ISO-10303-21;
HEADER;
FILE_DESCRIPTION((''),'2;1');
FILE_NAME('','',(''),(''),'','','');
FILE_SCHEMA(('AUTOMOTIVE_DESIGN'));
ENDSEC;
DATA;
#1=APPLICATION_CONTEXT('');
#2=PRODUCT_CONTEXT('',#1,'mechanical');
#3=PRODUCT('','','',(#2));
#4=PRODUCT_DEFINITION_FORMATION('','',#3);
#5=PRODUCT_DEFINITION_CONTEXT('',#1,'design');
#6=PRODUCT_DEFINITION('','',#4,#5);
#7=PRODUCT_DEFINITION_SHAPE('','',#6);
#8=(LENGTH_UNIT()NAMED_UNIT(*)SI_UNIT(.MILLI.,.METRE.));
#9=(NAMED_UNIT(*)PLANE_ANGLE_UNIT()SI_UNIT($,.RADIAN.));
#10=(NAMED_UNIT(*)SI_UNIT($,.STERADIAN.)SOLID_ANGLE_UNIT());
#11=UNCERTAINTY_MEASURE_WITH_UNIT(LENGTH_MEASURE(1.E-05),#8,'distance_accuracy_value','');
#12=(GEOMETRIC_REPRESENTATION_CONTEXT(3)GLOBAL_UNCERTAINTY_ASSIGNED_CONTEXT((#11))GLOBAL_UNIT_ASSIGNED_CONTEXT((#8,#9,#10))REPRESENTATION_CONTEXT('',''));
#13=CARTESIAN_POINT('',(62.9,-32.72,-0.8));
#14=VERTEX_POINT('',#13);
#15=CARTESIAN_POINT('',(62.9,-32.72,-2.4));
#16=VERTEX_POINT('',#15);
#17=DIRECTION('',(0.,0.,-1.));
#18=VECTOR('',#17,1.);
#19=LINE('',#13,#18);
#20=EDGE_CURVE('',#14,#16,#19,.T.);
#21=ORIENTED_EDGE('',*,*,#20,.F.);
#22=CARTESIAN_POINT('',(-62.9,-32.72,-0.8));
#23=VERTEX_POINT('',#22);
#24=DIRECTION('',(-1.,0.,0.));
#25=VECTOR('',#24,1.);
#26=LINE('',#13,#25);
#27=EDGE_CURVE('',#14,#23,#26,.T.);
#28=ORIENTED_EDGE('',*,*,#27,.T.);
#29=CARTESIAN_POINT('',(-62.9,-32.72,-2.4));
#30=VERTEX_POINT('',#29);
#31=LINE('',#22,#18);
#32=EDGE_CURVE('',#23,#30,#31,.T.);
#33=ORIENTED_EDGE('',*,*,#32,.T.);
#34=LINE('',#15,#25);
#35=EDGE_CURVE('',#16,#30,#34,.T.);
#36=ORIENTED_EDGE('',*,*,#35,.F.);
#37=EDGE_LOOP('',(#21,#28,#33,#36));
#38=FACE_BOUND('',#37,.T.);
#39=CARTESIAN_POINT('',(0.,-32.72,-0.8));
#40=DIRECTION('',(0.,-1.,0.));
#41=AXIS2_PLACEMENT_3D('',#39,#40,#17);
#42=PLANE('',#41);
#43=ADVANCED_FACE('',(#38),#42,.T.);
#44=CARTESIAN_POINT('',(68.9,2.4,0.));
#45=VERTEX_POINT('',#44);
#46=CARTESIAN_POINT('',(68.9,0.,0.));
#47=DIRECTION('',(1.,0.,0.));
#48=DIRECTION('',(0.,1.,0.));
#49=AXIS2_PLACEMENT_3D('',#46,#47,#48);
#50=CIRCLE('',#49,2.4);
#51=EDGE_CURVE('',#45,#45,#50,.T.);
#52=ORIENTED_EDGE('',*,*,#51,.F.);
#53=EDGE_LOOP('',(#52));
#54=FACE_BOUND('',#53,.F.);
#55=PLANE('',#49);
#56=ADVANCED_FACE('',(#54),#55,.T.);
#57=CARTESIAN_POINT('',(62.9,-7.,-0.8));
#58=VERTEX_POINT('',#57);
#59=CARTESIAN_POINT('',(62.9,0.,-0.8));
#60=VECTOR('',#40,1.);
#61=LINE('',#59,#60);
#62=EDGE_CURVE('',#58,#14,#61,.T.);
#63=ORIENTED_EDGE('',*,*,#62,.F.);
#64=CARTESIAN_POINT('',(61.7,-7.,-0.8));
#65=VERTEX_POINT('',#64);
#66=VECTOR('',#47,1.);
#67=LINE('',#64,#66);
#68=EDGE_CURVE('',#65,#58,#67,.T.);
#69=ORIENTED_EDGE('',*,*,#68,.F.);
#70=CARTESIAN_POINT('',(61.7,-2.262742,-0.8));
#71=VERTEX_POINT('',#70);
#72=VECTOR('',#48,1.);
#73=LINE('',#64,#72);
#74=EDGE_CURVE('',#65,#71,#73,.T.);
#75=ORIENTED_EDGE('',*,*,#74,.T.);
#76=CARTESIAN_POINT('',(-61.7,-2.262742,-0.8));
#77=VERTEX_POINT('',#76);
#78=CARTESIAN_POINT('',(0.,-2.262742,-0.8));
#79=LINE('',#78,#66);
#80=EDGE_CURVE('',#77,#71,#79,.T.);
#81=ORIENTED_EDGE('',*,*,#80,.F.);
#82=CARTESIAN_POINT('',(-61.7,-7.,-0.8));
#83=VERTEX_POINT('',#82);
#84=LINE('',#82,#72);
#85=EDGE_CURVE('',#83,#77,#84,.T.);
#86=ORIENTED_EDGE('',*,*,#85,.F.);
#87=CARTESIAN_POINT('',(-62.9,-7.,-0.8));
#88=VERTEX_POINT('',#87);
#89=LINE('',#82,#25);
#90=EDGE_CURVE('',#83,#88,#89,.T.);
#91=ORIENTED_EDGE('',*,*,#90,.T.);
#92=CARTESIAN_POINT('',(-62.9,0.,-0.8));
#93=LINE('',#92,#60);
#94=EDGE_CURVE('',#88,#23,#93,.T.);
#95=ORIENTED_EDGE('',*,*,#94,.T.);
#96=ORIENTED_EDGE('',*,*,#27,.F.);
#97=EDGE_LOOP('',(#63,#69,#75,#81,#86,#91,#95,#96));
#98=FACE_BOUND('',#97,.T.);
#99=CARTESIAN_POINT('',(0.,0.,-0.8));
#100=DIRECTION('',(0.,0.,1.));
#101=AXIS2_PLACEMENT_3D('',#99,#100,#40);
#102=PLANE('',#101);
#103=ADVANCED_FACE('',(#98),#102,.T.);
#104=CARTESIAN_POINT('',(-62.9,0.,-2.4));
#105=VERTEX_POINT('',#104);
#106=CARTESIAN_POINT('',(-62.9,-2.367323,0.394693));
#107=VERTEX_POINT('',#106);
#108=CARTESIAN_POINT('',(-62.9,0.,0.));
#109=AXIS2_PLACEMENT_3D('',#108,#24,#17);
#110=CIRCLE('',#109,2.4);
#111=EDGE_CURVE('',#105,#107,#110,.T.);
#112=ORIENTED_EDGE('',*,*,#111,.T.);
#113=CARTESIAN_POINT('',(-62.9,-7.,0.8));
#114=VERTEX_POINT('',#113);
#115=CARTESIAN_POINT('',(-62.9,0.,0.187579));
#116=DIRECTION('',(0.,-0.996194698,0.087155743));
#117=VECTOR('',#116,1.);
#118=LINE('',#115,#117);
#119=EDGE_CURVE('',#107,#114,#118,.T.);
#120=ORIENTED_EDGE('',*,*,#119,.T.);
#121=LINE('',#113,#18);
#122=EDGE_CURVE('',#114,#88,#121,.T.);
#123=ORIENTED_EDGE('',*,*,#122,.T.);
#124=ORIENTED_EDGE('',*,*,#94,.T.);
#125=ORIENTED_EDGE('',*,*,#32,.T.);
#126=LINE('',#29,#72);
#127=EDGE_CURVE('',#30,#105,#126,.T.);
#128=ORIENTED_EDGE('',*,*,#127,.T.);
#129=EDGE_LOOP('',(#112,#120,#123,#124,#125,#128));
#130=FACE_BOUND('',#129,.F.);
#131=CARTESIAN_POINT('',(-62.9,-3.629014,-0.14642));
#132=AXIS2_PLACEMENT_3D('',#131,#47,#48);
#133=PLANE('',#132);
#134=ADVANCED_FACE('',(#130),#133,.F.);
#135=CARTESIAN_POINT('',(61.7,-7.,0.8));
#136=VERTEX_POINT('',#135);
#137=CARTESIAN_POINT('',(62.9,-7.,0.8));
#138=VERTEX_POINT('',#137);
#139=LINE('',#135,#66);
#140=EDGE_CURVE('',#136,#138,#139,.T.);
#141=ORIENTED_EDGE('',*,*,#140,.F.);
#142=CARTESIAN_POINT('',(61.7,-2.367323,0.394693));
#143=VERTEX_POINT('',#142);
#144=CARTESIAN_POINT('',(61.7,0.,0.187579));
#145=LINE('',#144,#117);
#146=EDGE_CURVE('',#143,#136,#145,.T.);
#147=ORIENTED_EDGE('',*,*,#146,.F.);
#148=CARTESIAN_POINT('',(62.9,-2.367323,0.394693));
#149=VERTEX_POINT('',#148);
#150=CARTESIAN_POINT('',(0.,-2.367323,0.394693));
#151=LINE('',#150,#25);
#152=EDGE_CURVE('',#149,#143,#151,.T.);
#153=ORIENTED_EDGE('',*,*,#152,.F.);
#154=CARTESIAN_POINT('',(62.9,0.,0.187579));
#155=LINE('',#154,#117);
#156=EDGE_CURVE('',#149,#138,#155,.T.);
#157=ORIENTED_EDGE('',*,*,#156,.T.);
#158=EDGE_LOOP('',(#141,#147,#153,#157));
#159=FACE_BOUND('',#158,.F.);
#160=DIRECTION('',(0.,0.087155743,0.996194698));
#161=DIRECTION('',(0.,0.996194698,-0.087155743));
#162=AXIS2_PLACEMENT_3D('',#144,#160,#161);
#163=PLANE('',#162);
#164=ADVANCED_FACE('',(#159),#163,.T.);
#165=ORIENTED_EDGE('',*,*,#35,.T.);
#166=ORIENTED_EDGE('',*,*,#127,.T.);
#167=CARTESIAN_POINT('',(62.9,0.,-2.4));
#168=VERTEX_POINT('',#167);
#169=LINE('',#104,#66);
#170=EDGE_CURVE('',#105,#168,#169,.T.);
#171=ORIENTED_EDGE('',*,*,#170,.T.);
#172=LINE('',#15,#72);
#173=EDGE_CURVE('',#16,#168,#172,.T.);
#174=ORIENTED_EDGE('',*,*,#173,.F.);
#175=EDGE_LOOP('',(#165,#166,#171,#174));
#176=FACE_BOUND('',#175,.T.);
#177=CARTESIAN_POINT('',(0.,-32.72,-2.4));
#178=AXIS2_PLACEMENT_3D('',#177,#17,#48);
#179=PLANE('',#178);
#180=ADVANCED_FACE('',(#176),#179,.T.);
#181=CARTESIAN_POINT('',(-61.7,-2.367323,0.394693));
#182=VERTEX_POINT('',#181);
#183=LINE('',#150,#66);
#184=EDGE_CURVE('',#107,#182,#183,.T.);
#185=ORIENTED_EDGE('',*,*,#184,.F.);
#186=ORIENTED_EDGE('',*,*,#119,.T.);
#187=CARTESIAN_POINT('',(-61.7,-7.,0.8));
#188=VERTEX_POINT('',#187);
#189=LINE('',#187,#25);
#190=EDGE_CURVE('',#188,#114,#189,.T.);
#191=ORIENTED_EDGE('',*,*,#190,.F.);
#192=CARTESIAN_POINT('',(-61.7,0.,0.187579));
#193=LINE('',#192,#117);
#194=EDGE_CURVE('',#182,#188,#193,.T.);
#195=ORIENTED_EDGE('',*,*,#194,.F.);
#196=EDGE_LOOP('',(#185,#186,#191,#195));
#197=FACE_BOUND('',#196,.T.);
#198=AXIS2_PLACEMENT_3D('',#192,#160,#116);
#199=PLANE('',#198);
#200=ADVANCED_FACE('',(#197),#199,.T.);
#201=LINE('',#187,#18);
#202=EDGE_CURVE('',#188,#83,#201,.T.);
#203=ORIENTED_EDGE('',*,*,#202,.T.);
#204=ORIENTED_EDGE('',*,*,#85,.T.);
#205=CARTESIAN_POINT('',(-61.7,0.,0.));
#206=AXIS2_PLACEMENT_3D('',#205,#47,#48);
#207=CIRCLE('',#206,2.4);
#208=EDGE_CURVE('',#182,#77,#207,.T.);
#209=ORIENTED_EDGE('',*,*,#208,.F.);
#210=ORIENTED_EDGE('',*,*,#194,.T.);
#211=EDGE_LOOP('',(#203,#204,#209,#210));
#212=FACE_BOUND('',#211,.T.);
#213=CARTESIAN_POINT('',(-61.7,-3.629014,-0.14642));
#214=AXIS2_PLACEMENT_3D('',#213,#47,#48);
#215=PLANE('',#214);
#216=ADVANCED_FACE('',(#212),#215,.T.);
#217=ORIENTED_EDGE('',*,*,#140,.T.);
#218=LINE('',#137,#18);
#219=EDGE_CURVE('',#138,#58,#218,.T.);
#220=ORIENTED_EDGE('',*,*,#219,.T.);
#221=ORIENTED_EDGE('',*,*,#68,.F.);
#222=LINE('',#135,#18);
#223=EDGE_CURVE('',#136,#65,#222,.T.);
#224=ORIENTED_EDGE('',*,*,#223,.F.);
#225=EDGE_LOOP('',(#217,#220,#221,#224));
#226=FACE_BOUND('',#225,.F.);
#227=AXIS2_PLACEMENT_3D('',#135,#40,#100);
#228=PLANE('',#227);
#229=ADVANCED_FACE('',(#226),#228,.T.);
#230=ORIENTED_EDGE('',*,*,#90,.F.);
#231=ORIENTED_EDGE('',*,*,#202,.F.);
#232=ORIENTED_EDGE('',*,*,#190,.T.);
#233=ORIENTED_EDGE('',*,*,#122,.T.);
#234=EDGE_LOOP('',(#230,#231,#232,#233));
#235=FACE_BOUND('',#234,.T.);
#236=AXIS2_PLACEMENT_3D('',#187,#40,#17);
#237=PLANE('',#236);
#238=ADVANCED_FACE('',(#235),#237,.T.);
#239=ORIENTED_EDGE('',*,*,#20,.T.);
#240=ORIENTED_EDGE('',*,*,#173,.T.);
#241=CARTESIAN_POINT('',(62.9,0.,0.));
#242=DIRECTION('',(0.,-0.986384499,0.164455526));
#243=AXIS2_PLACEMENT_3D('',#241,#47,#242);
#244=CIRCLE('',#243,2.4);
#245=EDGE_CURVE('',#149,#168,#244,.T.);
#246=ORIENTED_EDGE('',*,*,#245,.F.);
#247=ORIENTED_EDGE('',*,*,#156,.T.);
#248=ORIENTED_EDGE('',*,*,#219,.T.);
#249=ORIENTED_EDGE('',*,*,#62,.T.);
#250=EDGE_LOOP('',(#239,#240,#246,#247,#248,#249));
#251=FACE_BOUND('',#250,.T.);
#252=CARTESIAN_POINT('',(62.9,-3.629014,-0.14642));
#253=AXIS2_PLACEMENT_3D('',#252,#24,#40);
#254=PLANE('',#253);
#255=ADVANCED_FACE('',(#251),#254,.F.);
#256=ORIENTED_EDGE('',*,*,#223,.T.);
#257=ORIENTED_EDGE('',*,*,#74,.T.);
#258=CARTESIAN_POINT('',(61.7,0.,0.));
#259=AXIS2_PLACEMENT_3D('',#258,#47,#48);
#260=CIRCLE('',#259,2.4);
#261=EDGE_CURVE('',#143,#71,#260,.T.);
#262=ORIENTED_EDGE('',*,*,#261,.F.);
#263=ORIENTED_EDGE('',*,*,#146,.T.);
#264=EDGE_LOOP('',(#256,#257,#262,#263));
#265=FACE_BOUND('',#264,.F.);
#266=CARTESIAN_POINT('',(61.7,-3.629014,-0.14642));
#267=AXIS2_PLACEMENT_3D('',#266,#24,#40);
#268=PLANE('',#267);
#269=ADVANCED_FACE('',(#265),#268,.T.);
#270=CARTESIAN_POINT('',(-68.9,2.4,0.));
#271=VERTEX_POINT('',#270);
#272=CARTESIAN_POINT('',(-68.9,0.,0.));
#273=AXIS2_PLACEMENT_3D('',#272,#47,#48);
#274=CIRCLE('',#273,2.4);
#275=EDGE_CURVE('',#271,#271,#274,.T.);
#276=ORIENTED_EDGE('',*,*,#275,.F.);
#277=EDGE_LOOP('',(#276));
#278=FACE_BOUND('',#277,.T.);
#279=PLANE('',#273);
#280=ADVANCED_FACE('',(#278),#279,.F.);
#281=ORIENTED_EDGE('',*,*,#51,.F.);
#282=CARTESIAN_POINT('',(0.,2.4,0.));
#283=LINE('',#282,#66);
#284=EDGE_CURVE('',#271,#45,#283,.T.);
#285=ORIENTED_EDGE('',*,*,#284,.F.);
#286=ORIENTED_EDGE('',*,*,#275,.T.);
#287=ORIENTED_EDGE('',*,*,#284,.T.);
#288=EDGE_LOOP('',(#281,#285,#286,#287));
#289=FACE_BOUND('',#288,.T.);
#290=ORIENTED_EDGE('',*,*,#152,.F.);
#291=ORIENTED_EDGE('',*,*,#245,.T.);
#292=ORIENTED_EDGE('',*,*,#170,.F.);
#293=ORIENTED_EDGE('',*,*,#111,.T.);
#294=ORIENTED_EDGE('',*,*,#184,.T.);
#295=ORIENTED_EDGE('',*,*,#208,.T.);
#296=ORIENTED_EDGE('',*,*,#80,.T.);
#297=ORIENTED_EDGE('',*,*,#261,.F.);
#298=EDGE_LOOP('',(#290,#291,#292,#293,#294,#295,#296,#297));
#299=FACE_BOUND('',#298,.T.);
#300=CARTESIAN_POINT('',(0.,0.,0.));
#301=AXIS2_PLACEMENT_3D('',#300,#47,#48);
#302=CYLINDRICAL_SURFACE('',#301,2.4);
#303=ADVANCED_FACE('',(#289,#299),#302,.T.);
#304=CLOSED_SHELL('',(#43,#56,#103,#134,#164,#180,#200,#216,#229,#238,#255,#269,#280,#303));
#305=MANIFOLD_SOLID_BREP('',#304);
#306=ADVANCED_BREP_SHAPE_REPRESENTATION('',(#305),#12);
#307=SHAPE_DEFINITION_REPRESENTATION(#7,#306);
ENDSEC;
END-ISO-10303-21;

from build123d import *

# Parameters (mm, degrees)
F0_W     = 137.8
F0_H     = 2.4
F3_DEPTH = 62.9
F4_START = -61.7
F4_DEPTH = 1.2


with BuildPart() as f1:
    # F0 (on Top) → F1 (revolve)
    with BuildSketch(Plane.XY):
        with Locations((0, 1.2)):
            Rectangle(F0_W, F0_H)
    revolve(axis=Axis((-37.6928597689, 0, 0), (1, 0, 0)))

    # F2 (on Right) → F3 (join, symmetric)
    with BuildSketch(Plane.YZ):
        Polygon((-32.72, -2.4), (0, -2.4), (0, -0.8), (-7, -0.8), (-32.72, -0.8), align=None)
    extrude(amount=F3_DEPTH, both=True)

    # F2 (on Right) → F4 (join)
    with BuildSketch(Plane.YZ.offset(F4_START)):
        Polygon((-7, -0.8), (0, -0.8), (0, 0.1875793553), (-7, 0.8), align=None)
    extrude(amount=-F4_DEPTH)

    # F5: F1 across plane


with BuildPart() as f1_1:
    add(f1.part)
    add(f1.part.mirror(Plane.YZ))


solid = f1_1.part
